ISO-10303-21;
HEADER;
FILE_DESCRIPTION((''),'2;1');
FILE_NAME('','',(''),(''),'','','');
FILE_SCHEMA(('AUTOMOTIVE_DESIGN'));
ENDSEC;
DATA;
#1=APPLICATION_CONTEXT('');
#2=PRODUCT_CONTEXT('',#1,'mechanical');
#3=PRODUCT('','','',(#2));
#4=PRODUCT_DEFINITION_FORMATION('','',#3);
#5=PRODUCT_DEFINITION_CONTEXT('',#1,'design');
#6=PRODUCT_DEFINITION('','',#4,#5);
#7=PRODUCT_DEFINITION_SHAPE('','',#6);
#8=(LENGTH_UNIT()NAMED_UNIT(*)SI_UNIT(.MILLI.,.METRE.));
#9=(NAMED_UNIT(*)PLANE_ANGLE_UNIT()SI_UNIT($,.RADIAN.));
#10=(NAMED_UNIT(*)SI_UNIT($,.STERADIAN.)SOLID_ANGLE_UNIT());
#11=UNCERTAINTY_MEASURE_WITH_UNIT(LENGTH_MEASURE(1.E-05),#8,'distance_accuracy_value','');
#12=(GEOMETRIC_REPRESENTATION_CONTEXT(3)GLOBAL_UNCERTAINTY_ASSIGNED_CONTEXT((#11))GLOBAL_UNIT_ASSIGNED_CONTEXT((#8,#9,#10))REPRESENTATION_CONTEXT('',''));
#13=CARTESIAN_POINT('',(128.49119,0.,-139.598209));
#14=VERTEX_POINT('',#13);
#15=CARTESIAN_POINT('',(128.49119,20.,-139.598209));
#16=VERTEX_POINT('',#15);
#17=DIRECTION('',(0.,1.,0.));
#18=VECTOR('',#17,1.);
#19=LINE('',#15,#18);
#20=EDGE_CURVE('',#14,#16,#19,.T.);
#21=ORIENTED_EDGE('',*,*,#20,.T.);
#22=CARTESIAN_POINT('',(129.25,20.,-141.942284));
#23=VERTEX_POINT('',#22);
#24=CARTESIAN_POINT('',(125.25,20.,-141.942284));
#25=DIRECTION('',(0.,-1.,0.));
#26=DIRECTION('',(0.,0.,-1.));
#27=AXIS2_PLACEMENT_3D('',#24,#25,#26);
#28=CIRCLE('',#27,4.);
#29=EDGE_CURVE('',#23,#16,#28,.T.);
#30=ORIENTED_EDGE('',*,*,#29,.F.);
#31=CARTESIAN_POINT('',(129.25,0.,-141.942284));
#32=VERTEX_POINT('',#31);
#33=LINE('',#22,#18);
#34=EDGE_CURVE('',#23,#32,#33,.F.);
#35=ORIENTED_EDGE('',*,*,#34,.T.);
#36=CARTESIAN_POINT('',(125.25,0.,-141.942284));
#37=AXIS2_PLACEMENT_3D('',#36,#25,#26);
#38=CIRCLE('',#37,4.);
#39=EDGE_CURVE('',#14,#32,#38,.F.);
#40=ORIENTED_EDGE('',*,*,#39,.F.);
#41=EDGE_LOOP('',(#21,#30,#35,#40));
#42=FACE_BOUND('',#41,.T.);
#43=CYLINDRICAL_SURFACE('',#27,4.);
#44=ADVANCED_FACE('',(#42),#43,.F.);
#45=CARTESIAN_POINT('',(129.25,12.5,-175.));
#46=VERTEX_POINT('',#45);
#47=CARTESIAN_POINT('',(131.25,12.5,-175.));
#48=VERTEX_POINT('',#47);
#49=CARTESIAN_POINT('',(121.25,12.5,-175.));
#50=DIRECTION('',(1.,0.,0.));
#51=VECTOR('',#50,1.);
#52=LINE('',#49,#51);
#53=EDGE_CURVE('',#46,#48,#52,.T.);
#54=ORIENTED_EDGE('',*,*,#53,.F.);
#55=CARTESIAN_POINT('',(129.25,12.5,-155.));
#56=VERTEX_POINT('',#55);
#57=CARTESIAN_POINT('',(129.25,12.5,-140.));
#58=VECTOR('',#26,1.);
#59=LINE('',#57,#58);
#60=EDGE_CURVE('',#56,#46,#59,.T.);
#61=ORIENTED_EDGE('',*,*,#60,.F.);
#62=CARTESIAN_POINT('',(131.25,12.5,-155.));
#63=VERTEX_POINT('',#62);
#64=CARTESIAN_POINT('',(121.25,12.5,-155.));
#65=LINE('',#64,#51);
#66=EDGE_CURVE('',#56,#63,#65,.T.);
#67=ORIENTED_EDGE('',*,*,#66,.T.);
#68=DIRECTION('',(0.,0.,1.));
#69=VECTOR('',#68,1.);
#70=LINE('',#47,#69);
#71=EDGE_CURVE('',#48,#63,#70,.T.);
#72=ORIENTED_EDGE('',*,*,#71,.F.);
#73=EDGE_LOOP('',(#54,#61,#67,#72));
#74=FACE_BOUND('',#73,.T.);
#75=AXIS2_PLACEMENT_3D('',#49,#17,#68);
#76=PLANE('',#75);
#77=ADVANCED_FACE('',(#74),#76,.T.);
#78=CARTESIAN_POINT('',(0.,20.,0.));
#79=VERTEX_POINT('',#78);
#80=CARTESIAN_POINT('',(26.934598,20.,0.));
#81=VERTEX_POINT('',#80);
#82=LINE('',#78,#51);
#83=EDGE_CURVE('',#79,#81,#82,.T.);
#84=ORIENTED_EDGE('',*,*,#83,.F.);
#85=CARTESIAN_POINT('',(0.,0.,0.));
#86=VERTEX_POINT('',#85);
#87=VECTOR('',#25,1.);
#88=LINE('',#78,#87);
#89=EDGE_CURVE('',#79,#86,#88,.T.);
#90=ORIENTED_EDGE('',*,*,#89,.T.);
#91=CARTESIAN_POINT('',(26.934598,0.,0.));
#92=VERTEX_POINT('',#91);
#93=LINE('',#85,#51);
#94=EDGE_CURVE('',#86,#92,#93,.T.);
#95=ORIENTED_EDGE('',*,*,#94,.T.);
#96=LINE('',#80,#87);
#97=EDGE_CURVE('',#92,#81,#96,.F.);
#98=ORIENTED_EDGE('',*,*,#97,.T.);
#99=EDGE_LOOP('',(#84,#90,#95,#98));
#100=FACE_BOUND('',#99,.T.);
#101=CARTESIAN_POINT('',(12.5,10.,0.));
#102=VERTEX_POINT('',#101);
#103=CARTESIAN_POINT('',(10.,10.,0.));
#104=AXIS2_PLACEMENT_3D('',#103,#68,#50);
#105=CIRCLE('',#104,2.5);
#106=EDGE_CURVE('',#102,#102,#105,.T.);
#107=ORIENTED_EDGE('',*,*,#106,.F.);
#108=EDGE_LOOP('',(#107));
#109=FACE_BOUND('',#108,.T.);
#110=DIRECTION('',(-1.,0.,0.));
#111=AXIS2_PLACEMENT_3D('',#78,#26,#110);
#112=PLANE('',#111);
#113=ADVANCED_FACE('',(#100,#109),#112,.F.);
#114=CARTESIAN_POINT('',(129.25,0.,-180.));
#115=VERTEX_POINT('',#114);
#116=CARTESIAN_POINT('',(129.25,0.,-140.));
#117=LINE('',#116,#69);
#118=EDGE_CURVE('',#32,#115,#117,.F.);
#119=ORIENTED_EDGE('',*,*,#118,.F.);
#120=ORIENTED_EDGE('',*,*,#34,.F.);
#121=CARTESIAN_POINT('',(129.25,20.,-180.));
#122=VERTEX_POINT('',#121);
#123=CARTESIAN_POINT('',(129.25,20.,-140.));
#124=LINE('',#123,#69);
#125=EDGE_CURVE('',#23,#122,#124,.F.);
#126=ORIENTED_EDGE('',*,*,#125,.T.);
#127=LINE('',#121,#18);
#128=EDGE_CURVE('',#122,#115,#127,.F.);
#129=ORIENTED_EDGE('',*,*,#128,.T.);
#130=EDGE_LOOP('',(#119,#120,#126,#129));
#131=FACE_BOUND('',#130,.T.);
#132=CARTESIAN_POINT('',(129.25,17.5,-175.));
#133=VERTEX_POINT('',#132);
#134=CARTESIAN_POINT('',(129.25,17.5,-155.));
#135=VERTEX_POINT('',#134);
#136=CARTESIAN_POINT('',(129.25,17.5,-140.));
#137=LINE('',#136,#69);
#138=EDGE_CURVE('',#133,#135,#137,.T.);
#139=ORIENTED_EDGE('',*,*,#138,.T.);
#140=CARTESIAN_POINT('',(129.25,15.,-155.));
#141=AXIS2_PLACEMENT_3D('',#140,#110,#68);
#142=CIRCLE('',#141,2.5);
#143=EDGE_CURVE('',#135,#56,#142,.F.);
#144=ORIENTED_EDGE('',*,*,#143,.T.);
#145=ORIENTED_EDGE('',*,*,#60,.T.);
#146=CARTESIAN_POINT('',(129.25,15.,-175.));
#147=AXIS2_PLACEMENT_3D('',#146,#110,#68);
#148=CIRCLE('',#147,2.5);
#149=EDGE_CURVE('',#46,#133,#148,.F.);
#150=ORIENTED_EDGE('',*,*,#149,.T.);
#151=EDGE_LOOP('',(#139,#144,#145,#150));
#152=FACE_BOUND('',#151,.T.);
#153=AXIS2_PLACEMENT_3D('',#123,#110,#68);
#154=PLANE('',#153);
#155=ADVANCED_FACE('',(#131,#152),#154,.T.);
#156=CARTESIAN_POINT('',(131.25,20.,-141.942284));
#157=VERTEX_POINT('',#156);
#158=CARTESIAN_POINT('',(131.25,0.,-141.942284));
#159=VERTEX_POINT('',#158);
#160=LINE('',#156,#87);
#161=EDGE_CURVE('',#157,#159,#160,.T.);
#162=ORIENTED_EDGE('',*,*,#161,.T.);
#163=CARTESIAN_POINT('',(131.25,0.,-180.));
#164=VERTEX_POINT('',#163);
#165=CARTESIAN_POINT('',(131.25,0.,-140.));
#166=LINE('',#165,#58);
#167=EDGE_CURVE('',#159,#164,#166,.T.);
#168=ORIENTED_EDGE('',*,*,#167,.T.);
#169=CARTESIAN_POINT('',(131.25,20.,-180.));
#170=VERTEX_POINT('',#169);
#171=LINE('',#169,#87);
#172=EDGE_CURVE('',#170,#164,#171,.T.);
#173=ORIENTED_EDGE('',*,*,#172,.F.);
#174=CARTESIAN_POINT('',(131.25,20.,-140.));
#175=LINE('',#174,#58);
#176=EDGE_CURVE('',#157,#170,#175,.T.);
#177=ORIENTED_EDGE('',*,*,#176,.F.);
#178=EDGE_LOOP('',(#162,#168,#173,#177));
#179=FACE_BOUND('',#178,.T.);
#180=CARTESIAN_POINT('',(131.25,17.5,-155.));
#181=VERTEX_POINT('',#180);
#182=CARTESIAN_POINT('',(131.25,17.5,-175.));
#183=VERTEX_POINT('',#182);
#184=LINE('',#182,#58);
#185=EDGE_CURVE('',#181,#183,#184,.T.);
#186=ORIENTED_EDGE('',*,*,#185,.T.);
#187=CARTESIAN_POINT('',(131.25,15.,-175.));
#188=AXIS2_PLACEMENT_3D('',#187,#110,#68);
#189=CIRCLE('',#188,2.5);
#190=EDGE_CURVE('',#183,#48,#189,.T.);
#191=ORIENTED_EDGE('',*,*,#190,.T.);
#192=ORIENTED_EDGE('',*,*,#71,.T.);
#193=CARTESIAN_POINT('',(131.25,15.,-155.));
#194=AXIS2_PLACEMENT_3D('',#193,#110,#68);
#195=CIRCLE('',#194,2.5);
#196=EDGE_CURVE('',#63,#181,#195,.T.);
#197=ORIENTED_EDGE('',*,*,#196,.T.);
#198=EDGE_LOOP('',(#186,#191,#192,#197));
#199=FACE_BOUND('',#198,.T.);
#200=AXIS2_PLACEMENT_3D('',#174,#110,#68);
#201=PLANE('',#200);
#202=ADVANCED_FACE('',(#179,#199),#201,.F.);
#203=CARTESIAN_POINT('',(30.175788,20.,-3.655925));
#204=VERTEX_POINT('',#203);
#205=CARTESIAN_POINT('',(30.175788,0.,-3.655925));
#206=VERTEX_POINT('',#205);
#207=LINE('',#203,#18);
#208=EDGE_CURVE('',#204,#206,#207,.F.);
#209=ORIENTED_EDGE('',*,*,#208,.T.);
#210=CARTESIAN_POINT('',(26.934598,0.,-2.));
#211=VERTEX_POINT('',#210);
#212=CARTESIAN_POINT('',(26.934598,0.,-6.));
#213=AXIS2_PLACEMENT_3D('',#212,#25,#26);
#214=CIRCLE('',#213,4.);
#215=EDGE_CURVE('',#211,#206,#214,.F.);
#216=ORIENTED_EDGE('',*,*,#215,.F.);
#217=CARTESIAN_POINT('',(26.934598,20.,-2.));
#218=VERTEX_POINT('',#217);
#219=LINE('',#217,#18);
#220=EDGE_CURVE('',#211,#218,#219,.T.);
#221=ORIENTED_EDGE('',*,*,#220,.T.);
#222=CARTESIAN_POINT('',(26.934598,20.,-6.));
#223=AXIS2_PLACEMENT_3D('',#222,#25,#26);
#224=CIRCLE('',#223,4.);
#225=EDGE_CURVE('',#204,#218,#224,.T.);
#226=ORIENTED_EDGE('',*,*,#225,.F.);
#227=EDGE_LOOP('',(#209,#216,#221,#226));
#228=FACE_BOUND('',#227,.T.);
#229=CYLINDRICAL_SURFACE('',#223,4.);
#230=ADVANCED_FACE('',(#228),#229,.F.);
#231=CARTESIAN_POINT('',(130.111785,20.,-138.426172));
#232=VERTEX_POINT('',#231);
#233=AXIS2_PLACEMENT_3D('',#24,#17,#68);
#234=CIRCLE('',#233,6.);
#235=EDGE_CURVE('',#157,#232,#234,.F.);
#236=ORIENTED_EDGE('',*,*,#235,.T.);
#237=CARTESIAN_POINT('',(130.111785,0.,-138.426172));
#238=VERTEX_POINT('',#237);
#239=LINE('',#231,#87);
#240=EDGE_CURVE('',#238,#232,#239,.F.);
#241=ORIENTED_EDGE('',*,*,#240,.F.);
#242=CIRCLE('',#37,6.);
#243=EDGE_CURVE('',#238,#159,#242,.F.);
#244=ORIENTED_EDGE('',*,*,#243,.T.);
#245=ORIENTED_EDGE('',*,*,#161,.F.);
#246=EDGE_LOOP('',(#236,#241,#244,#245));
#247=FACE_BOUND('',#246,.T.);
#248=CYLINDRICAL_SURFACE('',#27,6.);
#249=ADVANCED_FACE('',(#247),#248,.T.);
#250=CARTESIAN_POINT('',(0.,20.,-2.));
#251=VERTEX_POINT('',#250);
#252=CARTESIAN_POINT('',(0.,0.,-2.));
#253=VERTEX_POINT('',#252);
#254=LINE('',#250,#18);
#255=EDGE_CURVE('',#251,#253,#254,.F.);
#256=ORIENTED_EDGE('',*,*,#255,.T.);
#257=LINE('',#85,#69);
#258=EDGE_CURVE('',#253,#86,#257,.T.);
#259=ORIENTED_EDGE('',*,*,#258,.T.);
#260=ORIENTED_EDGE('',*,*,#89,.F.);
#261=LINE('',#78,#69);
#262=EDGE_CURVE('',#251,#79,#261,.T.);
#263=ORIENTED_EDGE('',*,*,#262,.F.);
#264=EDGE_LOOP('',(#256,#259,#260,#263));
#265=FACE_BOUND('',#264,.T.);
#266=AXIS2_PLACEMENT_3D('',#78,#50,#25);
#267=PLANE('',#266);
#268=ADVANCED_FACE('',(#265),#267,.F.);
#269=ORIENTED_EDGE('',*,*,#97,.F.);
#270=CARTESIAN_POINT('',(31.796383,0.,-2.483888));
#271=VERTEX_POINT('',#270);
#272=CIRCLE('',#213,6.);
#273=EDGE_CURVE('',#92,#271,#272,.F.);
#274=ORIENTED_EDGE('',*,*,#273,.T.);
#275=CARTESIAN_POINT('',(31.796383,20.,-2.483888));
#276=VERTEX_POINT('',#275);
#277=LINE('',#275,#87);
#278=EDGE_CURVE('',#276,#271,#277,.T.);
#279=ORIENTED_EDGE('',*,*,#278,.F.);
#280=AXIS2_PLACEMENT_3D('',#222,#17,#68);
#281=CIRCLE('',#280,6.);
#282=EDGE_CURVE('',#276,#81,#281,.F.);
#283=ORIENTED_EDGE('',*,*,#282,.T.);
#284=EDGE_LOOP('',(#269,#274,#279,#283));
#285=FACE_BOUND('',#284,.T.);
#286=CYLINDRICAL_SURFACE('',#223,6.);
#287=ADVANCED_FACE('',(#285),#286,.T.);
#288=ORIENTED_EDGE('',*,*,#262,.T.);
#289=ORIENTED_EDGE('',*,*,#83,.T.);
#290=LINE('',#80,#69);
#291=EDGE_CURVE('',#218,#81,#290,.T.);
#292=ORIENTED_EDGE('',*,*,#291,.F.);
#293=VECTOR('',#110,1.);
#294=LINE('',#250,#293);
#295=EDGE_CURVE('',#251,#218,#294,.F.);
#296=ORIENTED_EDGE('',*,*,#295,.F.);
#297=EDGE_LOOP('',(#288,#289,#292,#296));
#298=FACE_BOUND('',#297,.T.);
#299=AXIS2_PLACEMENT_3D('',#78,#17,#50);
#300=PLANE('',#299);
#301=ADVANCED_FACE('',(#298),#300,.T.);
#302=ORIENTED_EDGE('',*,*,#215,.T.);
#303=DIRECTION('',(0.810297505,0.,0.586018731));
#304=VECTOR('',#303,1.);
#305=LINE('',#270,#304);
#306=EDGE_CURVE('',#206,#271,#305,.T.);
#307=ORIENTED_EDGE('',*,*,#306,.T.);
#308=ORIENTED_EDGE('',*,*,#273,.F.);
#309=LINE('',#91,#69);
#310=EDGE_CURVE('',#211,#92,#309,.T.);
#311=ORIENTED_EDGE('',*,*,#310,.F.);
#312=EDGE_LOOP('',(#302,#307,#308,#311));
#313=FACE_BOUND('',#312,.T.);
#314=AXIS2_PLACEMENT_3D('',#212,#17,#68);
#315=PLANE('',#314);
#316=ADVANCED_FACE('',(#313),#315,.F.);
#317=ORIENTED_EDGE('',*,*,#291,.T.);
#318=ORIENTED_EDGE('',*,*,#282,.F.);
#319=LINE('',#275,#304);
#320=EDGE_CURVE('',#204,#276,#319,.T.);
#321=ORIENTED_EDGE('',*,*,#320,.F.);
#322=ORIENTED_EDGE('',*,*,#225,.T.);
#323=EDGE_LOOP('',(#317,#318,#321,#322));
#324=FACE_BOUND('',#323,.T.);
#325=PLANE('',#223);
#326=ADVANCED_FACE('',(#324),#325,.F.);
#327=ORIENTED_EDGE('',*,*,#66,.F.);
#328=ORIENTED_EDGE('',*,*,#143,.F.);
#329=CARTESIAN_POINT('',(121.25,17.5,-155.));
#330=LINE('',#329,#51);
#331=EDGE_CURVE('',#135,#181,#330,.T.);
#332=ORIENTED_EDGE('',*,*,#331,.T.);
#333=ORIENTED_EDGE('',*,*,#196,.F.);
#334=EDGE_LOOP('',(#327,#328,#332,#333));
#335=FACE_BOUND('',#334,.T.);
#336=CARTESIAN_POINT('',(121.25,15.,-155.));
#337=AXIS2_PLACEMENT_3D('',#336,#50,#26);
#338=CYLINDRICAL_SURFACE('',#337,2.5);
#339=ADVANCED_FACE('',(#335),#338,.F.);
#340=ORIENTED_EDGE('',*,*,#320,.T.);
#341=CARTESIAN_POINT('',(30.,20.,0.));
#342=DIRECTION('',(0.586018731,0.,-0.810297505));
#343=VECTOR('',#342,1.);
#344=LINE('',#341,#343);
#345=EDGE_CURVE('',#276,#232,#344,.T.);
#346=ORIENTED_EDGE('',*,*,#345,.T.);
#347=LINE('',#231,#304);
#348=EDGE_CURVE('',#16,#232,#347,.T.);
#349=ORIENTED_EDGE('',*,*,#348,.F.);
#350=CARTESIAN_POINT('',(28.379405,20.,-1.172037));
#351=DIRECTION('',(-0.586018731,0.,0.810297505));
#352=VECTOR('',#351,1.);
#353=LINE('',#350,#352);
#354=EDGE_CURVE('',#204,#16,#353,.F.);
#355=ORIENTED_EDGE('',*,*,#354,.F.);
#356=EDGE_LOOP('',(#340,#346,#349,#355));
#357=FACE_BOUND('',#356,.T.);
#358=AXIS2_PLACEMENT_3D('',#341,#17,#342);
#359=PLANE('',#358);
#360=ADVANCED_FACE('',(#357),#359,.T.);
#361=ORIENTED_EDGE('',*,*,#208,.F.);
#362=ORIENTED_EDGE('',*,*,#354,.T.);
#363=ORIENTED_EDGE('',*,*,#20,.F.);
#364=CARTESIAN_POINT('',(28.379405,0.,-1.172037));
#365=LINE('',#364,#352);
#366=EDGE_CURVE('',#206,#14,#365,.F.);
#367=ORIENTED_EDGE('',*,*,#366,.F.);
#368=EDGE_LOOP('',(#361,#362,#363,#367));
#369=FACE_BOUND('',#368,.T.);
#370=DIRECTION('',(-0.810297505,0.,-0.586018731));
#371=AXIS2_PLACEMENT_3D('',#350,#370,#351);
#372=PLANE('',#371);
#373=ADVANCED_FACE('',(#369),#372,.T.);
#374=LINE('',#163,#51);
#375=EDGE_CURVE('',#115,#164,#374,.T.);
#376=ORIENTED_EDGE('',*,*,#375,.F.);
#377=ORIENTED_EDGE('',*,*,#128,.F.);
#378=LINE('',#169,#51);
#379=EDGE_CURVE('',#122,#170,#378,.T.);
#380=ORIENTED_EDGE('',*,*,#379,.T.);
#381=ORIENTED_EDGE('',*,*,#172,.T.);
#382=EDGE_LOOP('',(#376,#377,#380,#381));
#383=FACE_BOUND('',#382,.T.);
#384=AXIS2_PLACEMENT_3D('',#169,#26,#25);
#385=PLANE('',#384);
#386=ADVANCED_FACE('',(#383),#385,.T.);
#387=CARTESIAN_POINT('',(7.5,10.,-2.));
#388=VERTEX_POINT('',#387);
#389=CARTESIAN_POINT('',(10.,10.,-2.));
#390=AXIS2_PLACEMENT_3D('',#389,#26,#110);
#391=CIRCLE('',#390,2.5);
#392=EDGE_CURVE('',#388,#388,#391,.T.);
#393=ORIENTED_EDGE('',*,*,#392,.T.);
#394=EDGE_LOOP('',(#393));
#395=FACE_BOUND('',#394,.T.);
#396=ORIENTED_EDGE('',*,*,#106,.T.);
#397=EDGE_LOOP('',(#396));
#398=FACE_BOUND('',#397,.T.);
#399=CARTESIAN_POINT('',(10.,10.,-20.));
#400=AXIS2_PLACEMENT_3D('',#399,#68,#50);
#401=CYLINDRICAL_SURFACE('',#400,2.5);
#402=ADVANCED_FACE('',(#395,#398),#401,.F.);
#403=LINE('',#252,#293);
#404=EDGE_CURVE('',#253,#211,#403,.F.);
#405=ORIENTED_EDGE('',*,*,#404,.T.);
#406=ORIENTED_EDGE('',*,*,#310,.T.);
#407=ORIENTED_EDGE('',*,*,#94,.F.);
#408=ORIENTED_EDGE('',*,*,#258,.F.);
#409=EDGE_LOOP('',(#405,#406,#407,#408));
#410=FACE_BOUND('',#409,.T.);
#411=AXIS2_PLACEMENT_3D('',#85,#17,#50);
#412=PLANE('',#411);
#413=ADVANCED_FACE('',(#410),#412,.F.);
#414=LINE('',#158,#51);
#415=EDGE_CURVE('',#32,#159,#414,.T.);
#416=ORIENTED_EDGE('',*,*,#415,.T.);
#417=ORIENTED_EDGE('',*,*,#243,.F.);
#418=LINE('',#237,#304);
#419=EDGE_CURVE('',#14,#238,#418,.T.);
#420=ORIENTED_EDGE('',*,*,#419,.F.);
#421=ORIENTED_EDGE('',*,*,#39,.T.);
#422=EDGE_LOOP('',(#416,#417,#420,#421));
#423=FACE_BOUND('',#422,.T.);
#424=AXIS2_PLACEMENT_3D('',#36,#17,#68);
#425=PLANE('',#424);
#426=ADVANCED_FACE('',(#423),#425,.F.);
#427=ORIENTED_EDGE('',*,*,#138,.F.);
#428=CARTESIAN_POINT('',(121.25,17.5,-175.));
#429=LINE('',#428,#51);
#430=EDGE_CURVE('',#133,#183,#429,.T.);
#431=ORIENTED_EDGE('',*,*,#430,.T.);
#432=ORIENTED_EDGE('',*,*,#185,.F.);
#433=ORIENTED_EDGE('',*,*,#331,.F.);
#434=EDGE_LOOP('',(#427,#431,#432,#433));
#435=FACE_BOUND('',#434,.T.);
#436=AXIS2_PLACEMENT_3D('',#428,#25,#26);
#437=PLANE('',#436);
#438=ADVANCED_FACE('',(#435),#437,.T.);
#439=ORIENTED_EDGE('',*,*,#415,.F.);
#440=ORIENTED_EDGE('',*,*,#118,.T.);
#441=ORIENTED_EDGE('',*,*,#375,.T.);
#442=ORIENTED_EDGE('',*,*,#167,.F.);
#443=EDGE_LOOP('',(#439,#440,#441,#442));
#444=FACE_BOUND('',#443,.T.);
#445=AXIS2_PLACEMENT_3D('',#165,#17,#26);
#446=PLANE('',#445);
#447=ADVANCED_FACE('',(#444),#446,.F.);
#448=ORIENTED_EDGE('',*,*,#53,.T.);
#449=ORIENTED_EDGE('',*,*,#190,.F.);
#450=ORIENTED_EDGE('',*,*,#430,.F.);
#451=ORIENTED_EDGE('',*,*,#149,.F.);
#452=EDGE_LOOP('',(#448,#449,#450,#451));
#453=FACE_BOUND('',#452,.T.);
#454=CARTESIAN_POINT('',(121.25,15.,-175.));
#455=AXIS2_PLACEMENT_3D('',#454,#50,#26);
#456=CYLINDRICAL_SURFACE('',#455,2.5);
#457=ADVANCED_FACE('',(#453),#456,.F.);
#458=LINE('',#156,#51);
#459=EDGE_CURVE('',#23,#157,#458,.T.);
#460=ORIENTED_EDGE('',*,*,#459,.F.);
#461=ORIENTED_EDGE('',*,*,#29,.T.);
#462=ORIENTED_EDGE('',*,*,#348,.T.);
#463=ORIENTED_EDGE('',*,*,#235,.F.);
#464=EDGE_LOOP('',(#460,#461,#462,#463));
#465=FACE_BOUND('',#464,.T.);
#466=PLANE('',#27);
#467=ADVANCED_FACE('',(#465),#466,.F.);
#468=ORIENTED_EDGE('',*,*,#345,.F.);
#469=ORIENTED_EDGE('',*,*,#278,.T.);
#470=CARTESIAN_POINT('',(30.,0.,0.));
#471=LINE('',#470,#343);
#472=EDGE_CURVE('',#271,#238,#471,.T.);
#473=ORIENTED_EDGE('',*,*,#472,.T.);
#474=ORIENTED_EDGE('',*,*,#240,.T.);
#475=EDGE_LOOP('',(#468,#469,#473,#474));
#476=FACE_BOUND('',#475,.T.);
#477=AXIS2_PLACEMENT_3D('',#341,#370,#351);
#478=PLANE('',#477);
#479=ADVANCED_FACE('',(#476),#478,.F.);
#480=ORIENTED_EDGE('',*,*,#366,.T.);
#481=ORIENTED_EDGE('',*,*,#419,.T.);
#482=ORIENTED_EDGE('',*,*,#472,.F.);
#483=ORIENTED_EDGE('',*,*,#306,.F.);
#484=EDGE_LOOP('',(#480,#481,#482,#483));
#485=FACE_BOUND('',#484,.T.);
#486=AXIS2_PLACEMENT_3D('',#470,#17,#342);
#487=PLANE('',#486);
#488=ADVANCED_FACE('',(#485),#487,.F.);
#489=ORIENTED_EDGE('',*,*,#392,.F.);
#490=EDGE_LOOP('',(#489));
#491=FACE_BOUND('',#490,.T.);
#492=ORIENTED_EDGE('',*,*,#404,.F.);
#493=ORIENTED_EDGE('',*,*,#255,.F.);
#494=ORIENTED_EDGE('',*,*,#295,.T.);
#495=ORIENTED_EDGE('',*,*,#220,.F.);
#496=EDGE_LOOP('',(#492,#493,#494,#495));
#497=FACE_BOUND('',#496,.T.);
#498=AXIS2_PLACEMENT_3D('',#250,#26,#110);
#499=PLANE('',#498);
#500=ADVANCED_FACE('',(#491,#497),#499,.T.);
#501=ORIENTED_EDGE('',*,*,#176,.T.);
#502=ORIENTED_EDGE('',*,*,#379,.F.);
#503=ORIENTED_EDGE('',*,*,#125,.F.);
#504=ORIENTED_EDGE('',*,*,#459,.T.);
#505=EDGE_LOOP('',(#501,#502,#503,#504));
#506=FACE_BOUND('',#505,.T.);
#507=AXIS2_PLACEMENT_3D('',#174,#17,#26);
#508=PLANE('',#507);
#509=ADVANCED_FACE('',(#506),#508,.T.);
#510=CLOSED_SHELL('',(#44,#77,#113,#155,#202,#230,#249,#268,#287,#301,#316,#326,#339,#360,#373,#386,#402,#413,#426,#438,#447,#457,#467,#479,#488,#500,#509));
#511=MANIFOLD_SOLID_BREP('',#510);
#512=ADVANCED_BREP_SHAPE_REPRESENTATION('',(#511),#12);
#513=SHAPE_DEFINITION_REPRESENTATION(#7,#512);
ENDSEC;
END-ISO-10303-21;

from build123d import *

# Parameters (mm, degrees)
BOSS_EXTRUDE1_DEPTH  = 20
CONVERT_SOLID2_DEPTH = 20
SKETCH8_R            = 2.5
CUT_EXTRUDE1_DEPTH   = 20
CUT_EXTRUDE2_DEPTH   = 10


# Read off the part's stored shape, not the designer's step: Convert-Solid2
with BuildPart() as part:
    # Sketch1 → Boss-Extrude1 (new body)
    with BuildSketch(Plane(origin=(0, 0, 0), x_dir=(1, 0, 0), z_dir=(0, 1, 0))):
        Polygon((0, 0), (30, 0), (131.25, 140), (131.25, 180), (126.25, 180), (126.25, 141.618570234), (27.445498313, 5), (0, 5), align=None)
    extrude(amount=BOSS_EXTRUDE1_DEPTH)

    # Convert-Solid2 outline → Convert-Solid2 (cut)
    with BuildSketch(Plane(origin=(0, 0, 0), x_dir=(1, 0, 0), z_dir=(0, 1, 0))):
        with BuildLine():
            Line((30, 0), (31.796383005, 2.483887612))
            ThreePointArc((31.796383005, 2.483887612), (29.664371379, 0.656935602), (26.934597975, 0))
            Line((26.934597975, 0), (30, 0))
        make_face()
        with BuildLine():
            ThreePointArc((131.25, 141.942284281), (130.958358353, 140.094408498), (130.11178503, 138.426171893))
            Line((130.11178503, 138.426171893), (131.25, 140))
            Line((131.25, 140), (131.25, 141.942284281))
        make_face()
        with BuildLine():
            Line((0, 5), (0, 2))
            Line((0, 2), (26.934597975, 2))
            ThreePointArc((26.934597975, 2), (28.754446911, 2.437957068), (30.175787995, 3.655925075))
            Line((30.175787995, 3.655925075), (128.49119002, 139.598209356))
            ThreePointArc((128.49119002, 139.598209356), (129.055572236, 140.710367092), (129.25, 141.942284281))
            Line((129.25, 141.942284281), (129.25, 180))
            Line((129.25, 180), (126.25, 180))
            Line((126.25, 180), (126.25, 141.618570234))
            Line((126.25, 141.618570234), (27.445498313, 5))
            Line((27.445498313, 5), (0, 5))
        make_face()
    extrude(amount=CONVERT_SOLID2_DEPTH, mode=Mode.SUBTRACT)

    # Sketch8 → Cut-Extrude1 (cut)
    with BuildSketch(Plane.XY):
        with Locations((10, 10)):
            Circle(SKETCH8_R)
    extrude(amount=-CUT_EXTRUDE1_DEPTH, mode=Mode.SUBTRACT)

    # Sketch9 → Cut-Extrude2 (cut)
    with BuildSketch(Plane(origin=(131.25, 0, -320.372504423), x_dir=(0, 0, 1), z_dir=(-1, 0, 0))):
        with BuildLine():
            Line((145.372504423, 17.5), (165.372504423, 17.5))
            ThreePointArc((165.372504423, 17.5), (167.872504423, 15), (165.372504423, 12.5))
            Line((165.372504423, 12.5), (145.372504423, 12.5))
            ThreePointArc((145.372504423, 12.5), (142.872504423, 15), (145.372504423, 17.5))
        make_face()
    extrude(amount=CUT_EXTRUDE2_DEPTH, mode=Mode.SUBTRACT)


solid = part.part
